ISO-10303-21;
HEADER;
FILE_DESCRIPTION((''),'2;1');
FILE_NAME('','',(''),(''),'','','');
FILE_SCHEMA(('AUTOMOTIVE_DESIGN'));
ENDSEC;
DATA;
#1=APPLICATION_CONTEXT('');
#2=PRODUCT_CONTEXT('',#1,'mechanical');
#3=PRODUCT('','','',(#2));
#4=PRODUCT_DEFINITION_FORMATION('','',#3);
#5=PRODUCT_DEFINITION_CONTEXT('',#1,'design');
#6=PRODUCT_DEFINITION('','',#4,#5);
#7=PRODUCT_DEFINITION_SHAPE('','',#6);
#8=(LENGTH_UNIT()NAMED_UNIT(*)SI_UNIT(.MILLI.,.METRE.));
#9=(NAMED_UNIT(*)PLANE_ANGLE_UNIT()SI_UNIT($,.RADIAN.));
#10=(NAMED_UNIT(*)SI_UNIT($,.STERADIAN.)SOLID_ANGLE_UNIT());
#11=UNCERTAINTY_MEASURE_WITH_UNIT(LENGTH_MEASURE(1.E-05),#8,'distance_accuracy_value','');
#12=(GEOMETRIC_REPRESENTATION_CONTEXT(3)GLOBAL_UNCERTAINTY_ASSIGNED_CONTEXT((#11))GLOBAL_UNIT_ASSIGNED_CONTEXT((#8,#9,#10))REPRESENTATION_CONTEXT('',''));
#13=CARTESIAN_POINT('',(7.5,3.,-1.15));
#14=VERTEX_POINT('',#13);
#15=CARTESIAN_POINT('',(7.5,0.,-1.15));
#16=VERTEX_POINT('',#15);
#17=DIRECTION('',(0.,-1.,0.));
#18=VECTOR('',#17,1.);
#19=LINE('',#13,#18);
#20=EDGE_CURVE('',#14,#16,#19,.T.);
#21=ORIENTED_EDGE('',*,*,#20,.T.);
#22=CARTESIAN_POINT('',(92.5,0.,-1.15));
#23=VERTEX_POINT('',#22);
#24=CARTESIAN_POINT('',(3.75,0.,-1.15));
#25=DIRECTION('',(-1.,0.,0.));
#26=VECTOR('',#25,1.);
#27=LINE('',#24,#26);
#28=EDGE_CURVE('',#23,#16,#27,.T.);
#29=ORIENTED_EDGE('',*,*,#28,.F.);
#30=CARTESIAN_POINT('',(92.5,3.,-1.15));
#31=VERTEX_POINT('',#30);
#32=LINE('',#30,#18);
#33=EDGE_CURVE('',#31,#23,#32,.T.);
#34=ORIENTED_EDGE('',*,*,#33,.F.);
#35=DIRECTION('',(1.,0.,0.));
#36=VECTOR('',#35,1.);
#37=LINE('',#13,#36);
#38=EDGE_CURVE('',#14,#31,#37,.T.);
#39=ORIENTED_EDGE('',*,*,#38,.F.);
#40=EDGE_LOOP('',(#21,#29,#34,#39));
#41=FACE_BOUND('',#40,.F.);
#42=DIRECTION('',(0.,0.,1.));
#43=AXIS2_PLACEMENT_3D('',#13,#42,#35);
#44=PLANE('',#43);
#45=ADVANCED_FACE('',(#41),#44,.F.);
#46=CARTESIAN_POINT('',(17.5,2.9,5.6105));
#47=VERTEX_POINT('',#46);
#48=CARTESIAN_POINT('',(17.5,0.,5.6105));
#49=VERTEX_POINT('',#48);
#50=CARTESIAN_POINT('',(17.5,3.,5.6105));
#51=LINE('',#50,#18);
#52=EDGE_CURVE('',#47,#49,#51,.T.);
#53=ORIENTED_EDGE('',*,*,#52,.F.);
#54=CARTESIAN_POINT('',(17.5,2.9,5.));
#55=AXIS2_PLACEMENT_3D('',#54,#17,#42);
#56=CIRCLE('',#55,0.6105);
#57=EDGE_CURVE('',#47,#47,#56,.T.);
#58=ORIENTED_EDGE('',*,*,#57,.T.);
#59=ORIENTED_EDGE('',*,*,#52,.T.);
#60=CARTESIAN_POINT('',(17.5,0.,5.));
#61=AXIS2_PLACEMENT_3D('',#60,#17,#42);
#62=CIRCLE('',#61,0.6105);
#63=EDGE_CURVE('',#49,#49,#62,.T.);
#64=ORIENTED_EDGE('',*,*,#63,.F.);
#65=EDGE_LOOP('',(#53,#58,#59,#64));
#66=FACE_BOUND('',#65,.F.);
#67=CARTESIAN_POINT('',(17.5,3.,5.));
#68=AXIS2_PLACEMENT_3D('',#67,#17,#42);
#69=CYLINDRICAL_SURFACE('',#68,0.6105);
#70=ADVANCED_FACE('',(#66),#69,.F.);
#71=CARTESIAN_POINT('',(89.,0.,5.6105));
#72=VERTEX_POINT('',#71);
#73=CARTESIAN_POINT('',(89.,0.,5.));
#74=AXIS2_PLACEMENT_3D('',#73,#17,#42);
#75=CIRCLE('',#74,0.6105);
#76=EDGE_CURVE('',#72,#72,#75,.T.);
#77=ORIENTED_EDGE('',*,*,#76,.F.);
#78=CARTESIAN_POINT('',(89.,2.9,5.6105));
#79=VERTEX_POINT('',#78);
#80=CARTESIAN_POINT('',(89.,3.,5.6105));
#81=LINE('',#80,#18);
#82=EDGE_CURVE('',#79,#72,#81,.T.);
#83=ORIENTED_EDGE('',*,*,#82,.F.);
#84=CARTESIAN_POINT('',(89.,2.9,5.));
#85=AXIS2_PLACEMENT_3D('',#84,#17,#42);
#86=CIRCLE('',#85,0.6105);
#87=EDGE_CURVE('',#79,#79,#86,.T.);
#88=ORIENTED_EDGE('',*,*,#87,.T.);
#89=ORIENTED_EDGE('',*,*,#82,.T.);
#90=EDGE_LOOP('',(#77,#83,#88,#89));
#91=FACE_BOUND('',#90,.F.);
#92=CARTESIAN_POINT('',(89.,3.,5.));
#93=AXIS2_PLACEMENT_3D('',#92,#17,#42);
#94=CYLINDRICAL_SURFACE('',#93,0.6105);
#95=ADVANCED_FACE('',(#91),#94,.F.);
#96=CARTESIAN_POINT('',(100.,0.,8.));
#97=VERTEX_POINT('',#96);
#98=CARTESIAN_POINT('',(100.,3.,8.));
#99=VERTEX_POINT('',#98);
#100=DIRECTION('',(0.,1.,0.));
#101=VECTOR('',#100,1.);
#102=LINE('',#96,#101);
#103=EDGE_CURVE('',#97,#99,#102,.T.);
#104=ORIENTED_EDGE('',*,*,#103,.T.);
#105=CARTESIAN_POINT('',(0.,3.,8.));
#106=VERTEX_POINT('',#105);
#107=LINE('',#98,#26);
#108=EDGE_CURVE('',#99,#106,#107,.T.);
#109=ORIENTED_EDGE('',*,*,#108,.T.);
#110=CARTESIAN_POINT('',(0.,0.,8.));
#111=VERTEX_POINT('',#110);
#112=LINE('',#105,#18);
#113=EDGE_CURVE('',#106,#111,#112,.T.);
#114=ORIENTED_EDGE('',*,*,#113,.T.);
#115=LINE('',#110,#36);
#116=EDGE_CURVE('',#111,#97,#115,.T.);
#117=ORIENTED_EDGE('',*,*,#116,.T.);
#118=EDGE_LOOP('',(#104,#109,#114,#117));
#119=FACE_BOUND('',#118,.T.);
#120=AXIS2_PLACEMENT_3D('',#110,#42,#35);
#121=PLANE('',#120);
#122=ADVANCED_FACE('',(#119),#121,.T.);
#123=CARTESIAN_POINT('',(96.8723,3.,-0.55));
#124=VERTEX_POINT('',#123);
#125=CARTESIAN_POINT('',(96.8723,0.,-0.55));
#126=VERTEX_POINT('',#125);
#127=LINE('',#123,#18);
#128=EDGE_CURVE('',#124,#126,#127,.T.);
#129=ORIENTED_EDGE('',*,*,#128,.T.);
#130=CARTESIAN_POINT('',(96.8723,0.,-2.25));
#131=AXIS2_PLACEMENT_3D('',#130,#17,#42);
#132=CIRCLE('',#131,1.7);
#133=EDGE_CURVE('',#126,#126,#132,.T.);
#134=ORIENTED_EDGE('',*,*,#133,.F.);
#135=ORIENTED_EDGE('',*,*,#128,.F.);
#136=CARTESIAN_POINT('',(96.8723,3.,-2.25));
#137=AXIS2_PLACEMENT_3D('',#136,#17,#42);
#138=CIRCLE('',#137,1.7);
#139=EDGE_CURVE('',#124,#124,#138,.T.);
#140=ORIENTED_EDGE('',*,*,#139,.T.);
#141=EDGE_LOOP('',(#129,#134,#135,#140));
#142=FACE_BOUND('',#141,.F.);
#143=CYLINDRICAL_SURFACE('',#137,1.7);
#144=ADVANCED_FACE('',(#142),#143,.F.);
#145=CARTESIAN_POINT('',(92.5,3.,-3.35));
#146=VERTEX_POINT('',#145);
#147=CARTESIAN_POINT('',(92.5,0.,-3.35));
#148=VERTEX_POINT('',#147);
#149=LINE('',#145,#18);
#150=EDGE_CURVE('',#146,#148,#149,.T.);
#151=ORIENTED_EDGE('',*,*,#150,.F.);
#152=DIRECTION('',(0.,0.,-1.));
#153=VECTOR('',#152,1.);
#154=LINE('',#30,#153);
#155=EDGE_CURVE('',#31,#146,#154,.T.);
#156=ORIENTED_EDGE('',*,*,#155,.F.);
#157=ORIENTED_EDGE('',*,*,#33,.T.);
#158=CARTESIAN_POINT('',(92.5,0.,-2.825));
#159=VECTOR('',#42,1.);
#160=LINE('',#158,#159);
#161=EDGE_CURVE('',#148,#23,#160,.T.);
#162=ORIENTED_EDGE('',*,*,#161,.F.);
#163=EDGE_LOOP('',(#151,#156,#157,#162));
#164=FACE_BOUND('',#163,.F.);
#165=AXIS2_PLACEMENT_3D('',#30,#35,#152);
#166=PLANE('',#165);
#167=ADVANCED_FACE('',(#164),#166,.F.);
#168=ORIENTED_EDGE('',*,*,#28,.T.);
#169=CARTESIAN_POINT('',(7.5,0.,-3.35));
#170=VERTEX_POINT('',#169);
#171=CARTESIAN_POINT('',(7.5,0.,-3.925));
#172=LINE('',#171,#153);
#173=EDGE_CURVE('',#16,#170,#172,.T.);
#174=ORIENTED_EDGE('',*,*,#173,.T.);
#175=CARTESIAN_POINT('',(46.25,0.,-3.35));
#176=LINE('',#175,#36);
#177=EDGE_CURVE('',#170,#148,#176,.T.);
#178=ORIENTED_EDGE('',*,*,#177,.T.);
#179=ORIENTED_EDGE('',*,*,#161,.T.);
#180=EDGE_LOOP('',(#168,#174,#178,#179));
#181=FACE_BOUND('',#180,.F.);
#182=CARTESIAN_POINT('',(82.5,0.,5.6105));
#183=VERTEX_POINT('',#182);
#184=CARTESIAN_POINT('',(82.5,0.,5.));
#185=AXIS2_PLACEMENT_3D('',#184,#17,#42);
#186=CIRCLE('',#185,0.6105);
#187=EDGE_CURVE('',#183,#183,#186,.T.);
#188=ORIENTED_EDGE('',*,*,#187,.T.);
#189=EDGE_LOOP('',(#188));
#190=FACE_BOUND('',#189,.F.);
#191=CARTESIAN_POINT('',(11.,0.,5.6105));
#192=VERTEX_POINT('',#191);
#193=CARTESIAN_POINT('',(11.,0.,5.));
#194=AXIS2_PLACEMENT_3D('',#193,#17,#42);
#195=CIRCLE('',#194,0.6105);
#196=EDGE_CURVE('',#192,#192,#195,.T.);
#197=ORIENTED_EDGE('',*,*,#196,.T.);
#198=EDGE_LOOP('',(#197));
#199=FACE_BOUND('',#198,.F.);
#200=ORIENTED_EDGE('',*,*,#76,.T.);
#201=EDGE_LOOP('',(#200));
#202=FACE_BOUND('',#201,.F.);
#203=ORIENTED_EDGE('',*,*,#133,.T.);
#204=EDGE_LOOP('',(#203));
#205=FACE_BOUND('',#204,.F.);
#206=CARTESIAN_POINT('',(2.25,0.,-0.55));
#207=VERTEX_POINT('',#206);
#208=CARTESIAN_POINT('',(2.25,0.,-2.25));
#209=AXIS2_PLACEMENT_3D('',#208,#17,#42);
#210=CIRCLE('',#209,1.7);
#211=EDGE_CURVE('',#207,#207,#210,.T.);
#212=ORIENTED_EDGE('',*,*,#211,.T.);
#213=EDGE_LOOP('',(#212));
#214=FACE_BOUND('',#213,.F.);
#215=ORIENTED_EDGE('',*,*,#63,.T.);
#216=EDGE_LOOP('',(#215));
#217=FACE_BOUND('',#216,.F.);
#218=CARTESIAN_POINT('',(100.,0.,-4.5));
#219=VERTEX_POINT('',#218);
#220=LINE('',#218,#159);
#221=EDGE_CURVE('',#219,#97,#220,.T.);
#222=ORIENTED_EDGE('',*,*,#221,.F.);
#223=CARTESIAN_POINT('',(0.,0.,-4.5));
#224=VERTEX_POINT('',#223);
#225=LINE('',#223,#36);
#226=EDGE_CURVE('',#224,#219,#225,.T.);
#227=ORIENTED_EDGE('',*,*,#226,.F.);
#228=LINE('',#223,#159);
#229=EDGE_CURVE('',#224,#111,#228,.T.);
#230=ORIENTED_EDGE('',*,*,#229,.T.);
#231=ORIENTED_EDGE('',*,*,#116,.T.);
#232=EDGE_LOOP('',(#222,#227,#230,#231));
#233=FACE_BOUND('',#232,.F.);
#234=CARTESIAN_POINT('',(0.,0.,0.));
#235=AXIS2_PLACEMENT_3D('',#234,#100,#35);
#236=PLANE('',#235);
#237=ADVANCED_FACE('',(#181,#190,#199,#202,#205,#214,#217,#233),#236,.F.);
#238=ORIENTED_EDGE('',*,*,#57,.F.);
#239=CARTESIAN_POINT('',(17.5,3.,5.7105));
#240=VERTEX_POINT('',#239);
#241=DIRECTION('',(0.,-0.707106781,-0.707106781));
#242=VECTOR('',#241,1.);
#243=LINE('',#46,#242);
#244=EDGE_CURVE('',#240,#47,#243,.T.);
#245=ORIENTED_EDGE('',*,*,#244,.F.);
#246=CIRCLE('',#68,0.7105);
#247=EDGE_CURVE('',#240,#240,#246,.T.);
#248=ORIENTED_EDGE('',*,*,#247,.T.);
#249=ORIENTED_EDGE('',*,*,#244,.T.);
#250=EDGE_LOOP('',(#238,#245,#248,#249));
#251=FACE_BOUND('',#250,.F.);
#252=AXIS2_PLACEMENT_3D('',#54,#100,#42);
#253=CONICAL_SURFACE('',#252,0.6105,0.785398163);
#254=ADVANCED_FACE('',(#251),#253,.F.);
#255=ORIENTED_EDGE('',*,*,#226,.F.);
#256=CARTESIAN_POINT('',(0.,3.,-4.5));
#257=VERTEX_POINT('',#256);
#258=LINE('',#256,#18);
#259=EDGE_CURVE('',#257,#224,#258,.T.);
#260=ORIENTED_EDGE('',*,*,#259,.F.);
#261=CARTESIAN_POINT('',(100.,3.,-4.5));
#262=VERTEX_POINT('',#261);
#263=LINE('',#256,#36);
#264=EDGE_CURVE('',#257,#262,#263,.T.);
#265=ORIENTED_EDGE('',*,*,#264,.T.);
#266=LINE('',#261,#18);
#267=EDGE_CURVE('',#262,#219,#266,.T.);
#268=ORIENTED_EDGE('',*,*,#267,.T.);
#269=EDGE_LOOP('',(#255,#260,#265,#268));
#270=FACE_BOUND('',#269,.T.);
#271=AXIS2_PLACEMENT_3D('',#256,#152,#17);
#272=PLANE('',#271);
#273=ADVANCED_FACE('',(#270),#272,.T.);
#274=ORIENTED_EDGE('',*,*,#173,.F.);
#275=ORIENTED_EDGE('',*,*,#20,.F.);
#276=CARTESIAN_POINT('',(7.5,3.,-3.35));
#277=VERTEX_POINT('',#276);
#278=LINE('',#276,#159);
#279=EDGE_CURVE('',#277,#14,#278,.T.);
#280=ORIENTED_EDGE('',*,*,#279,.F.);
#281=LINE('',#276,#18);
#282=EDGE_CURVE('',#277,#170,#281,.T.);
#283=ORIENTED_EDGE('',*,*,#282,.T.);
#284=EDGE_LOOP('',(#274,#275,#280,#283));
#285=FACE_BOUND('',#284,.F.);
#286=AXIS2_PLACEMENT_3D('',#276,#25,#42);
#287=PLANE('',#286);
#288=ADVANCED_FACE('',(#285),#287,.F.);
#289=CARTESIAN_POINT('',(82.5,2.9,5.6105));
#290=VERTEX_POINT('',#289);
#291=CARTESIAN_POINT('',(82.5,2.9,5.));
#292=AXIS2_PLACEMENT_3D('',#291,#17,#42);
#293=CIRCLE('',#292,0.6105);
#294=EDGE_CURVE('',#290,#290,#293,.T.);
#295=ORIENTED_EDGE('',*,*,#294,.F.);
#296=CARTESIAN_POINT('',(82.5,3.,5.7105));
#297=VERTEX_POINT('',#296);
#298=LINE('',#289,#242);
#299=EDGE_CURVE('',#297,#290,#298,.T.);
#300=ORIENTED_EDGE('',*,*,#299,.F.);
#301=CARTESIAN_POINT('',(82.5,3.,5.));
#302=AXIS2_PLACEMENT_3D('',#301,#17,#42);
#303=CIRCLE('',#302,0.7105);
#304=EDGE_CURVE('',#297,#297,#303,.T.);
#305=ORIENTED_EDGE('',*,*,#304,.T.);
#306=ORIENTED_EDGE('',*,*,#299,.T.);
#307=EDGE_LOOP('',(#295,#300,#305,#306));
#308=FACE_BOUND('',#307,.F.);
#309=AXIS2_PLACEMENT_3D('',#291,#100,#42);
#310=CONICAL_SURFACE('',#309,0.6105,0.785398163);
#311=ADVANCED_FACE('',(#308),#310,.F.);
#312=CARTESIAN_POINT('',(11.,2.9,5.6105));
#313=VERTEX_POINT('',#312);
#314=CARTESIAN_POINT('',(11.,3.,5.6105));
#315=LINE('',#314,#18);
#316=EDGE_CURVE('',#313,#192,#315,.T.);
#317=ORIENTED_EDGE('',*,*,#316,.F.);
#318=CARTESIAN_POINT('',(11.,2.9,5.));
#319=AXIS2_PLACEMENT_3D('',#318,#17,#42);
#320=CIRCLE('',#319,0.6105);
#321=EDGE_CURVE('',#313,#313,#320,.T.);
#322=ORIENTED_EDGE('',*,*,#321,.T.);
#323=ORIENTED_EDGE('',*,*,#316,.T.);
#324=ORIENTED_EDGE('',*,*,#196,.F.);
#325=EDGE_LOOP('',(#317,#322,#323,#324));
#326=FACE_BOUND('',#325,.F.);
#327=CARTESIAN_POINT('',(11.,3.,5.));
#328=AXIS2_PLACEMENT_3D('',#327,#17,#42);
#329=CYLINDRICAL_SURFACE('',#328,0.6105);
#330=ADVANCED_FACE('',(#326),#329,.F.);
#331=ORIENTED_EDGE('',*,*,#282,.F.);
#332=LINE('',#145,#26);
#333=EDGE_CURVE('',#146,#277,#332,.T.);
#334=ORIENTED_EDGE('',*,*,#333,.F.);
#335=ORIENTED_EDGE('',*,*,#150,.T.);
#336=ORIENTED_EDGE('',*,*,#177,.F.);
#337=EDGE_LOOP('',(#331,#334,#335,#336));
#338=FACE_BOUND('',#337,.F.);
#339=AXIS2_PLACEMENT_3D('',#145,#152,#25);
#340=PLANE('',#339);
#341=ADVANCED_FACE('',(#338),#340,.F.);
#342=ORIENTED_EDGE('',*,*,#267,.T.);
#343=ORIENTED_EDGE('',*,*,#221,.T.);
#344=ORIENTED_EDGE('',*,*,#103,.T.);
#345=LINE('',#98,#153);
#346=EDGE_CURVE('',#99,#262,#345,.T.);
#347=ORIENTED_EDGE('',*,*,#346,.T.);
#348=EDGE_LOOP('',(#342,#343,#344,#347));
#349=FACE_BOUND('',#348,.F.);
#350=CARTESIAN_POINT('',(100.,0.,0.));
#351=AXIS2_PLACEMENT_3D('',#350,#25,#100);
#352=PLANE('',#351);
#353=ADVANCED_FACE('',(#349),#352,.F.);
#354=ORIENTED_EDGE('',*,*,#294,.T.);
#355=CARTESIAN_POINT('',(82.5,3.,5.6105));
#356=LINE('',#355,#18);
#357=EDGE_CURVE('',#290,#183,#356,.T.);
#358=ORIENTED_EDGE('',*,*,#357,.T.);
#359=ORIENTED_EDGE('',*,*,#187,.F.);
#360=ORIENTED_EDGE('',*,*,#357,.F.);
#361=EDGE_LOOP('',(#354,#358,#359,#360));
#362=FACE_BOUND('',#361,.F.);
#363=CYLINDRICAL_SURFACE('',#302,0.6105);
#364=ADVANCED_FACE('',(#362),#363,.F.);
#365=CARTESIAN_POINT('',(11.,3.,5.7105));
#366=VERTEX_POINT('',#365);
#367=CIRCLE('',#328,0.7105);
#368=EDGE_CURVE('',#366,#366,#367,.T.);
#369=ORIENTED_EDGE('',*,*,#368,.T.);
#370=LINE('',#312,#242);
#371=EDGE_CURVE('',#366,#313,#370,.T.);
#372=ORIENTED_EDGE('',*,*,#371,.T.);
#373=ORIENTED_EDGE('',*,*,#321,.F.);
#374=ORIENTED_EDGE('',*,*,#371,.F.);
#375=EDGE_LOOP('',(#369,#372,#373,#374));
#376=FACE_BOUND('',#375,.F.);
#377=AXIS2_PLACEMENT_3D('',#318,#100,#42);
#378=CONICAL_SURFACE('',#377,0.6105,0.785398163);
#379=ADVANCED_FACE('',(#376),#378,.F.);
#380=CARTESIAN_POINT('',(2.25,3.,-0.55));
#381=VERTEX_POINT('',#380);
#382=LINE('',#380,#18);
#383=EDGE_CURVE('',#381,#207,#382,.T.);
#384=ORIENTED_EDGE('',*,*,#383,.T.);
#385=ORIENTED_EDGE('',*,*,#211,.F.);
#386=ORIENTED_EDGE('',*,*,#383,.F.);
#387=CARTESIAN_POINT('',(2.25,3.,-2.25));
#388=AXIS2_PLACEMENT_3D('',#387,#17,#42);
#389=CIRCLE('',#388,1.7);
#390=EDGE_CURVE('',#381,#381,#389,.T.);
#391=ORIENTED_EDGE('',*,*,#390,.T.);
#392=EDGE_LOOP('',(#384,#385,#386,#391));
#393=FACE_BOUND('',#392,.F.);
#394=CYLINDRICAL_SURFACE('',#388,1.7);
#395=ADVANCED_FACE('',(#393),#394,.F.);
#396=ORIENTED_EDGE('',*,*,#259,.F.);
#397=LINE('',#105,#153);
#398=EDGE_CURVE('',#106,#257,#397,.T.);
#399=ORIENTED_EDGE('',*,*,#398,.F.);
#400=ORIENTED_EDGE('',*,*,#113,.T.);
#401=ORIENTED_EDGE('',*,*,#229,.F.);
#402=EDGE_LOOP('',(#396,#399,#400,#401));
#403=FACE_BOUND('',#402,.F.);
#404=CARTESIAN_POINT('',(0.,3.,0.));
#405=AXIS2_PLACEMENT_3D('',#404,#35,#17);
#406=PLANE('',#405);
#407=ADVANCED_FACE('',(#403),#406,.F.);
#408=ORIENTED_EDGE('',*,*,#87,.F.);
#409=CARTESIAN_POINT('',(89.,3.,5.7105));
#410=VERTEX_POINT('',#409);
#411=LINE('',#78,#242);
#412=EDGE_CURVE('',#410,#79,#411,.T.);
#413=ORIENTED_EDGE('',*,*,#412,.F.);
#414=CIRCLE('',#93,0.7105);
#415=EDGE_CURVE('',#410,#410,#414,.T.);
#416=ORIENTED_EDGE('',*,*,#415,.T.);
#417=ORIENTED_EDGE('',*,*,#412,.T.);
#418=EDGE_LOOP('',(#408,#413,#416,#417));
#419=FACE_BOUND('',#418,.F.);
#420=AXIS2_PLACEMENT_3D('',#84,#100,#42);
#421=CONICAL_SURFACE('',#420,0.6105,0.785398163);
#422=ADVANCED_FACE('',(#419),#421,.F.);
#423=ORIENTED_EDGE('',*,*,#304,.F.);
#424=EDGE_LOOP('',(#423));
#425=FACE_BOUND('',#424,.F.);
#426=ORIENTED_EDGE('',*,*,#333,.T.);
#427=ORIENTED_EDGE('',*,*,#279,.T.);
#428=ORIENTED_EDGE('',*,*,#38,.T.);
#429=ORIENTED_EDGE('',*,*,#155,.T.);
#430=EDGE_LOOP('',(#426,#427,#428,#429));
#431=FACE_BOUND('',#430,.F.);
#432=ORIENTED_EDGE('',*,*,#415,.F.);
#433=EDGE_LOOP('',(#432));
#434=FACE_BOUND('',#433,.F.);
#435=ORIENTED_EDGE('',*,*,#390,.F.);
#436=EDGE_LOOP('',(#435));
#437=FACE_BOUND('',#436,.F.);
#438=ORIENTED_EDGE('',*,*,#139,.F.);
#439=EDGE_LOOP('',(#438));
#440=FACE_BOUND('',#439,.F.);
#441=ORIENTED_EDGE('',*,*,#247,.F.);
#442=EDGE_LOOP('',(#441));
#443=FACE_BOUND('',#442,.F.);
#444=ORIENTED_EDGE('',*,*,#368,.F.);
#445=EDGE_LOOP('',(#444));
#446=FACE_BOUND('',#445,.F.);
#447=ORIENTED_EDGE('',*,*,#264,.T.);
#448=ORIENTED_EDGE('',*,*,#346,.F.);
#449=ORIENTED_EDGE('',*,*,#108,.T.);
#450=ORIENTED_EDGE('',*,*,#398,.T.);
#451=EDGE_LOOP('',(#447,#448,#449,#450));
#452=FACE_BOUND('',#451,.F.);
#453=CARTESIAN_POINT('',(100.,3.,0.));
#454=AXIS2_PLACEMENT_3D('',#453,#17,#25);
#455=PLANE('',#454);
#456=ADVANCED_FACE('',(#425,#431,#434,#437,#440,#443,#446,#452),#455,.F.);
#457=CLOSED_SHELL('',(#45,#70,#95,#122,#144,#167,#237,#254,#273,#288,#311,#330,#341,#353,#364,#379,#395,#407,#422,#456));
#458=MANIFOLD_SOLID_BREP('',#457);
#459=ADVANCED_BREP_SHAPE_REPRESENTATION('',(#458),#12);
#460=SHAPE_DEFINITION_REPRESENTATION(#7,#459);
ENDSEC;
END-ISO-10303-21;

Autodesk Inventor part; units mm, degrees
ref_plane "YZ Plane" through (0, 0, 0) normal (1, 0, 0) x (0, 1, 0)
ref_plane "XZ Plane" through (0, 0, 0) normal (0, 1, 0) x (-1, 0, 0)
ref_plane "XY Plane" through (0, 0, 0) normal (0, 0, 1) x (1, 0, 0)
sketch "Sketch4" plane through (0, 0, 0) normal (1, 0, 0) x (0, 1, 0)
  line L0 (0, 0) -> (3, 0)
  line L1 (3, 0) -> (3, -4.5)
  line L2 (3, -4.5) -> (0, -4.5)
  line L3 (0, -4.5) -> (0, 0)
  dimension "d21" = 3
  dimension "d22" = 4.5
extrude "Extrusion2" add sketch "Sketch4" along normal blind 100
sketch "Sketch5" plane through (0, 3, 0) normal (0, 1, 0) x (1, 0, 0)
  circle A0 centre (2.25, 2.25) radius 1.5
  circle A1 centre (96.8723, 2.25) radius 1.5
  line L0 (0, 4.5) -> (0, 0) construction
  line L1 (0, 0) -> (100, 0) construction
  dimension "d25" = 3
  dimension "d26" = 3
  dimension "d27" = 2.25
  dimension "d28" = 2.25
  dimension "d29" = 4.5
hole "Hole2" at (2.25, 3, -2.25) at (96.8723, 3, -2.25) direction (0, -1, 0) diameter 3.4 depth 8.8 tip angle 118 clearance for "Socket Head Cap Screw ISO 4762" size "M3" standard "ISO"
sketch "Sketch6" plane through (0, 3, 0) normal (0, 1, 0) x (1, 0, 0)
  line L0 (7.5, 1.15) -> (92.5, 1.15)
  line L1 (92.5, 1.15) -> (92.5, 3.35)
  line L2 (92.5, 3.35) -> (7.5, 3.35)
  line L3 (7.5, 3.35) -> (7.5, 1.15)
  line L4 (0, 4.5) -> (100, 4.5) projected
  line L5 (0, 0) -> (100, 0) projected
  line L6 (0, 4.5) -> (0, 0) projected
  dimension "d37" = 85
  dimension "d38" = 2.2
  dimension "d39" = 4.5
  dimension "d40" = 1.15
  dimension "d41" = 7.5
extrude "Extrusion3" cut sketch "Sketch6" against normal blind 100
sketch "Sketch7" plane through (0, 0, 0) normal (0, 0, 1) x (1, 0, 0)
  line L0 (0, 0) -> (100, 0)
  line L1 (100, 0) -> (100, 3)
  line L2 (100, 3) -> (0, 3)
  line L3 (0, 3) -> (0, 0)
extrude "Extrusion4" add sketch "Sketch7" along normal blind 8
sketch "Sketch8" plane through (0, 3, -4.5) normal (0, 1, 0) x (1, 0, 0)
  line L0 (11, -9.5) -> (89, -9.5) construction
  line L1 (0, 0) -> (0, -12.5) projected
  line L2 (-1, -16) -> (89, -16) construction
  line L3 (-1, -17) -> (89, -17) construction
  line L4 (89, -15) -> (-1, -15) construction
  arc A0 (-1, -15) -> (-1, -17) centre (-1, -16) ccw construction
  arc A1 (89, -17) -> (89, -15) centre (89, -16) ccw construction
  circle A2 centre (11, -9.5) radius 1
  circle A3 centre (89, -9.5) radius 1
  circle A4 centre (82.5, -9.5) radius 1
  circle A5 centre (17.5, -9.5) radius 1
  point P0 (0, -4.5)
  point P1 (50, -9.5)
  point P2 (44, -16)
  dimension "d47" = 78
  dimension "d48" = 50
  dimension "d49" = 2
  dimension "d50" = 90
  dimension "d51" = 6.5
  dimension "d54" = 9.5
  dimension "d55" = 2
  dimension "d56" = 2
  dimension "d57" = 2
  dimension "d58" = 2
  dimension "d59" = 6.5
  dimension "d60" = 6.5
sketch "Sketch9" plane through (0, 0, -4.5) normal (0, -1, 0) x (1, 0, 0)
  point P0 (0, 4.5)
sketch "Sketch10" plane through (0, 0, -4.5) normal (0, -1, 0) x (1, 0, 0)
  point P0 (0, 4.5)
hole "Hole3" at (11, 3, 5) at (17.5, 3, 5) at (82.5, 3, 5) at (89, 3, 5) direction (0, -1, 0) diameter 1.221 depth 5.3 tip angle 118 thread size "M1.6x0.35" class "6H" standard "ISO Metric profile"
chamfer "Chamfer1" distance 0.1 angle 45 4 edges at (11, 3, 4.3895) (17.5, 3, 4.3895) (82.5, 3, 4.3895) (89, 3, 4.3895)
equation "\"d27\" = d28"
equation "\"d28\" = 0.5 * d29"
properties part number "szyna"
